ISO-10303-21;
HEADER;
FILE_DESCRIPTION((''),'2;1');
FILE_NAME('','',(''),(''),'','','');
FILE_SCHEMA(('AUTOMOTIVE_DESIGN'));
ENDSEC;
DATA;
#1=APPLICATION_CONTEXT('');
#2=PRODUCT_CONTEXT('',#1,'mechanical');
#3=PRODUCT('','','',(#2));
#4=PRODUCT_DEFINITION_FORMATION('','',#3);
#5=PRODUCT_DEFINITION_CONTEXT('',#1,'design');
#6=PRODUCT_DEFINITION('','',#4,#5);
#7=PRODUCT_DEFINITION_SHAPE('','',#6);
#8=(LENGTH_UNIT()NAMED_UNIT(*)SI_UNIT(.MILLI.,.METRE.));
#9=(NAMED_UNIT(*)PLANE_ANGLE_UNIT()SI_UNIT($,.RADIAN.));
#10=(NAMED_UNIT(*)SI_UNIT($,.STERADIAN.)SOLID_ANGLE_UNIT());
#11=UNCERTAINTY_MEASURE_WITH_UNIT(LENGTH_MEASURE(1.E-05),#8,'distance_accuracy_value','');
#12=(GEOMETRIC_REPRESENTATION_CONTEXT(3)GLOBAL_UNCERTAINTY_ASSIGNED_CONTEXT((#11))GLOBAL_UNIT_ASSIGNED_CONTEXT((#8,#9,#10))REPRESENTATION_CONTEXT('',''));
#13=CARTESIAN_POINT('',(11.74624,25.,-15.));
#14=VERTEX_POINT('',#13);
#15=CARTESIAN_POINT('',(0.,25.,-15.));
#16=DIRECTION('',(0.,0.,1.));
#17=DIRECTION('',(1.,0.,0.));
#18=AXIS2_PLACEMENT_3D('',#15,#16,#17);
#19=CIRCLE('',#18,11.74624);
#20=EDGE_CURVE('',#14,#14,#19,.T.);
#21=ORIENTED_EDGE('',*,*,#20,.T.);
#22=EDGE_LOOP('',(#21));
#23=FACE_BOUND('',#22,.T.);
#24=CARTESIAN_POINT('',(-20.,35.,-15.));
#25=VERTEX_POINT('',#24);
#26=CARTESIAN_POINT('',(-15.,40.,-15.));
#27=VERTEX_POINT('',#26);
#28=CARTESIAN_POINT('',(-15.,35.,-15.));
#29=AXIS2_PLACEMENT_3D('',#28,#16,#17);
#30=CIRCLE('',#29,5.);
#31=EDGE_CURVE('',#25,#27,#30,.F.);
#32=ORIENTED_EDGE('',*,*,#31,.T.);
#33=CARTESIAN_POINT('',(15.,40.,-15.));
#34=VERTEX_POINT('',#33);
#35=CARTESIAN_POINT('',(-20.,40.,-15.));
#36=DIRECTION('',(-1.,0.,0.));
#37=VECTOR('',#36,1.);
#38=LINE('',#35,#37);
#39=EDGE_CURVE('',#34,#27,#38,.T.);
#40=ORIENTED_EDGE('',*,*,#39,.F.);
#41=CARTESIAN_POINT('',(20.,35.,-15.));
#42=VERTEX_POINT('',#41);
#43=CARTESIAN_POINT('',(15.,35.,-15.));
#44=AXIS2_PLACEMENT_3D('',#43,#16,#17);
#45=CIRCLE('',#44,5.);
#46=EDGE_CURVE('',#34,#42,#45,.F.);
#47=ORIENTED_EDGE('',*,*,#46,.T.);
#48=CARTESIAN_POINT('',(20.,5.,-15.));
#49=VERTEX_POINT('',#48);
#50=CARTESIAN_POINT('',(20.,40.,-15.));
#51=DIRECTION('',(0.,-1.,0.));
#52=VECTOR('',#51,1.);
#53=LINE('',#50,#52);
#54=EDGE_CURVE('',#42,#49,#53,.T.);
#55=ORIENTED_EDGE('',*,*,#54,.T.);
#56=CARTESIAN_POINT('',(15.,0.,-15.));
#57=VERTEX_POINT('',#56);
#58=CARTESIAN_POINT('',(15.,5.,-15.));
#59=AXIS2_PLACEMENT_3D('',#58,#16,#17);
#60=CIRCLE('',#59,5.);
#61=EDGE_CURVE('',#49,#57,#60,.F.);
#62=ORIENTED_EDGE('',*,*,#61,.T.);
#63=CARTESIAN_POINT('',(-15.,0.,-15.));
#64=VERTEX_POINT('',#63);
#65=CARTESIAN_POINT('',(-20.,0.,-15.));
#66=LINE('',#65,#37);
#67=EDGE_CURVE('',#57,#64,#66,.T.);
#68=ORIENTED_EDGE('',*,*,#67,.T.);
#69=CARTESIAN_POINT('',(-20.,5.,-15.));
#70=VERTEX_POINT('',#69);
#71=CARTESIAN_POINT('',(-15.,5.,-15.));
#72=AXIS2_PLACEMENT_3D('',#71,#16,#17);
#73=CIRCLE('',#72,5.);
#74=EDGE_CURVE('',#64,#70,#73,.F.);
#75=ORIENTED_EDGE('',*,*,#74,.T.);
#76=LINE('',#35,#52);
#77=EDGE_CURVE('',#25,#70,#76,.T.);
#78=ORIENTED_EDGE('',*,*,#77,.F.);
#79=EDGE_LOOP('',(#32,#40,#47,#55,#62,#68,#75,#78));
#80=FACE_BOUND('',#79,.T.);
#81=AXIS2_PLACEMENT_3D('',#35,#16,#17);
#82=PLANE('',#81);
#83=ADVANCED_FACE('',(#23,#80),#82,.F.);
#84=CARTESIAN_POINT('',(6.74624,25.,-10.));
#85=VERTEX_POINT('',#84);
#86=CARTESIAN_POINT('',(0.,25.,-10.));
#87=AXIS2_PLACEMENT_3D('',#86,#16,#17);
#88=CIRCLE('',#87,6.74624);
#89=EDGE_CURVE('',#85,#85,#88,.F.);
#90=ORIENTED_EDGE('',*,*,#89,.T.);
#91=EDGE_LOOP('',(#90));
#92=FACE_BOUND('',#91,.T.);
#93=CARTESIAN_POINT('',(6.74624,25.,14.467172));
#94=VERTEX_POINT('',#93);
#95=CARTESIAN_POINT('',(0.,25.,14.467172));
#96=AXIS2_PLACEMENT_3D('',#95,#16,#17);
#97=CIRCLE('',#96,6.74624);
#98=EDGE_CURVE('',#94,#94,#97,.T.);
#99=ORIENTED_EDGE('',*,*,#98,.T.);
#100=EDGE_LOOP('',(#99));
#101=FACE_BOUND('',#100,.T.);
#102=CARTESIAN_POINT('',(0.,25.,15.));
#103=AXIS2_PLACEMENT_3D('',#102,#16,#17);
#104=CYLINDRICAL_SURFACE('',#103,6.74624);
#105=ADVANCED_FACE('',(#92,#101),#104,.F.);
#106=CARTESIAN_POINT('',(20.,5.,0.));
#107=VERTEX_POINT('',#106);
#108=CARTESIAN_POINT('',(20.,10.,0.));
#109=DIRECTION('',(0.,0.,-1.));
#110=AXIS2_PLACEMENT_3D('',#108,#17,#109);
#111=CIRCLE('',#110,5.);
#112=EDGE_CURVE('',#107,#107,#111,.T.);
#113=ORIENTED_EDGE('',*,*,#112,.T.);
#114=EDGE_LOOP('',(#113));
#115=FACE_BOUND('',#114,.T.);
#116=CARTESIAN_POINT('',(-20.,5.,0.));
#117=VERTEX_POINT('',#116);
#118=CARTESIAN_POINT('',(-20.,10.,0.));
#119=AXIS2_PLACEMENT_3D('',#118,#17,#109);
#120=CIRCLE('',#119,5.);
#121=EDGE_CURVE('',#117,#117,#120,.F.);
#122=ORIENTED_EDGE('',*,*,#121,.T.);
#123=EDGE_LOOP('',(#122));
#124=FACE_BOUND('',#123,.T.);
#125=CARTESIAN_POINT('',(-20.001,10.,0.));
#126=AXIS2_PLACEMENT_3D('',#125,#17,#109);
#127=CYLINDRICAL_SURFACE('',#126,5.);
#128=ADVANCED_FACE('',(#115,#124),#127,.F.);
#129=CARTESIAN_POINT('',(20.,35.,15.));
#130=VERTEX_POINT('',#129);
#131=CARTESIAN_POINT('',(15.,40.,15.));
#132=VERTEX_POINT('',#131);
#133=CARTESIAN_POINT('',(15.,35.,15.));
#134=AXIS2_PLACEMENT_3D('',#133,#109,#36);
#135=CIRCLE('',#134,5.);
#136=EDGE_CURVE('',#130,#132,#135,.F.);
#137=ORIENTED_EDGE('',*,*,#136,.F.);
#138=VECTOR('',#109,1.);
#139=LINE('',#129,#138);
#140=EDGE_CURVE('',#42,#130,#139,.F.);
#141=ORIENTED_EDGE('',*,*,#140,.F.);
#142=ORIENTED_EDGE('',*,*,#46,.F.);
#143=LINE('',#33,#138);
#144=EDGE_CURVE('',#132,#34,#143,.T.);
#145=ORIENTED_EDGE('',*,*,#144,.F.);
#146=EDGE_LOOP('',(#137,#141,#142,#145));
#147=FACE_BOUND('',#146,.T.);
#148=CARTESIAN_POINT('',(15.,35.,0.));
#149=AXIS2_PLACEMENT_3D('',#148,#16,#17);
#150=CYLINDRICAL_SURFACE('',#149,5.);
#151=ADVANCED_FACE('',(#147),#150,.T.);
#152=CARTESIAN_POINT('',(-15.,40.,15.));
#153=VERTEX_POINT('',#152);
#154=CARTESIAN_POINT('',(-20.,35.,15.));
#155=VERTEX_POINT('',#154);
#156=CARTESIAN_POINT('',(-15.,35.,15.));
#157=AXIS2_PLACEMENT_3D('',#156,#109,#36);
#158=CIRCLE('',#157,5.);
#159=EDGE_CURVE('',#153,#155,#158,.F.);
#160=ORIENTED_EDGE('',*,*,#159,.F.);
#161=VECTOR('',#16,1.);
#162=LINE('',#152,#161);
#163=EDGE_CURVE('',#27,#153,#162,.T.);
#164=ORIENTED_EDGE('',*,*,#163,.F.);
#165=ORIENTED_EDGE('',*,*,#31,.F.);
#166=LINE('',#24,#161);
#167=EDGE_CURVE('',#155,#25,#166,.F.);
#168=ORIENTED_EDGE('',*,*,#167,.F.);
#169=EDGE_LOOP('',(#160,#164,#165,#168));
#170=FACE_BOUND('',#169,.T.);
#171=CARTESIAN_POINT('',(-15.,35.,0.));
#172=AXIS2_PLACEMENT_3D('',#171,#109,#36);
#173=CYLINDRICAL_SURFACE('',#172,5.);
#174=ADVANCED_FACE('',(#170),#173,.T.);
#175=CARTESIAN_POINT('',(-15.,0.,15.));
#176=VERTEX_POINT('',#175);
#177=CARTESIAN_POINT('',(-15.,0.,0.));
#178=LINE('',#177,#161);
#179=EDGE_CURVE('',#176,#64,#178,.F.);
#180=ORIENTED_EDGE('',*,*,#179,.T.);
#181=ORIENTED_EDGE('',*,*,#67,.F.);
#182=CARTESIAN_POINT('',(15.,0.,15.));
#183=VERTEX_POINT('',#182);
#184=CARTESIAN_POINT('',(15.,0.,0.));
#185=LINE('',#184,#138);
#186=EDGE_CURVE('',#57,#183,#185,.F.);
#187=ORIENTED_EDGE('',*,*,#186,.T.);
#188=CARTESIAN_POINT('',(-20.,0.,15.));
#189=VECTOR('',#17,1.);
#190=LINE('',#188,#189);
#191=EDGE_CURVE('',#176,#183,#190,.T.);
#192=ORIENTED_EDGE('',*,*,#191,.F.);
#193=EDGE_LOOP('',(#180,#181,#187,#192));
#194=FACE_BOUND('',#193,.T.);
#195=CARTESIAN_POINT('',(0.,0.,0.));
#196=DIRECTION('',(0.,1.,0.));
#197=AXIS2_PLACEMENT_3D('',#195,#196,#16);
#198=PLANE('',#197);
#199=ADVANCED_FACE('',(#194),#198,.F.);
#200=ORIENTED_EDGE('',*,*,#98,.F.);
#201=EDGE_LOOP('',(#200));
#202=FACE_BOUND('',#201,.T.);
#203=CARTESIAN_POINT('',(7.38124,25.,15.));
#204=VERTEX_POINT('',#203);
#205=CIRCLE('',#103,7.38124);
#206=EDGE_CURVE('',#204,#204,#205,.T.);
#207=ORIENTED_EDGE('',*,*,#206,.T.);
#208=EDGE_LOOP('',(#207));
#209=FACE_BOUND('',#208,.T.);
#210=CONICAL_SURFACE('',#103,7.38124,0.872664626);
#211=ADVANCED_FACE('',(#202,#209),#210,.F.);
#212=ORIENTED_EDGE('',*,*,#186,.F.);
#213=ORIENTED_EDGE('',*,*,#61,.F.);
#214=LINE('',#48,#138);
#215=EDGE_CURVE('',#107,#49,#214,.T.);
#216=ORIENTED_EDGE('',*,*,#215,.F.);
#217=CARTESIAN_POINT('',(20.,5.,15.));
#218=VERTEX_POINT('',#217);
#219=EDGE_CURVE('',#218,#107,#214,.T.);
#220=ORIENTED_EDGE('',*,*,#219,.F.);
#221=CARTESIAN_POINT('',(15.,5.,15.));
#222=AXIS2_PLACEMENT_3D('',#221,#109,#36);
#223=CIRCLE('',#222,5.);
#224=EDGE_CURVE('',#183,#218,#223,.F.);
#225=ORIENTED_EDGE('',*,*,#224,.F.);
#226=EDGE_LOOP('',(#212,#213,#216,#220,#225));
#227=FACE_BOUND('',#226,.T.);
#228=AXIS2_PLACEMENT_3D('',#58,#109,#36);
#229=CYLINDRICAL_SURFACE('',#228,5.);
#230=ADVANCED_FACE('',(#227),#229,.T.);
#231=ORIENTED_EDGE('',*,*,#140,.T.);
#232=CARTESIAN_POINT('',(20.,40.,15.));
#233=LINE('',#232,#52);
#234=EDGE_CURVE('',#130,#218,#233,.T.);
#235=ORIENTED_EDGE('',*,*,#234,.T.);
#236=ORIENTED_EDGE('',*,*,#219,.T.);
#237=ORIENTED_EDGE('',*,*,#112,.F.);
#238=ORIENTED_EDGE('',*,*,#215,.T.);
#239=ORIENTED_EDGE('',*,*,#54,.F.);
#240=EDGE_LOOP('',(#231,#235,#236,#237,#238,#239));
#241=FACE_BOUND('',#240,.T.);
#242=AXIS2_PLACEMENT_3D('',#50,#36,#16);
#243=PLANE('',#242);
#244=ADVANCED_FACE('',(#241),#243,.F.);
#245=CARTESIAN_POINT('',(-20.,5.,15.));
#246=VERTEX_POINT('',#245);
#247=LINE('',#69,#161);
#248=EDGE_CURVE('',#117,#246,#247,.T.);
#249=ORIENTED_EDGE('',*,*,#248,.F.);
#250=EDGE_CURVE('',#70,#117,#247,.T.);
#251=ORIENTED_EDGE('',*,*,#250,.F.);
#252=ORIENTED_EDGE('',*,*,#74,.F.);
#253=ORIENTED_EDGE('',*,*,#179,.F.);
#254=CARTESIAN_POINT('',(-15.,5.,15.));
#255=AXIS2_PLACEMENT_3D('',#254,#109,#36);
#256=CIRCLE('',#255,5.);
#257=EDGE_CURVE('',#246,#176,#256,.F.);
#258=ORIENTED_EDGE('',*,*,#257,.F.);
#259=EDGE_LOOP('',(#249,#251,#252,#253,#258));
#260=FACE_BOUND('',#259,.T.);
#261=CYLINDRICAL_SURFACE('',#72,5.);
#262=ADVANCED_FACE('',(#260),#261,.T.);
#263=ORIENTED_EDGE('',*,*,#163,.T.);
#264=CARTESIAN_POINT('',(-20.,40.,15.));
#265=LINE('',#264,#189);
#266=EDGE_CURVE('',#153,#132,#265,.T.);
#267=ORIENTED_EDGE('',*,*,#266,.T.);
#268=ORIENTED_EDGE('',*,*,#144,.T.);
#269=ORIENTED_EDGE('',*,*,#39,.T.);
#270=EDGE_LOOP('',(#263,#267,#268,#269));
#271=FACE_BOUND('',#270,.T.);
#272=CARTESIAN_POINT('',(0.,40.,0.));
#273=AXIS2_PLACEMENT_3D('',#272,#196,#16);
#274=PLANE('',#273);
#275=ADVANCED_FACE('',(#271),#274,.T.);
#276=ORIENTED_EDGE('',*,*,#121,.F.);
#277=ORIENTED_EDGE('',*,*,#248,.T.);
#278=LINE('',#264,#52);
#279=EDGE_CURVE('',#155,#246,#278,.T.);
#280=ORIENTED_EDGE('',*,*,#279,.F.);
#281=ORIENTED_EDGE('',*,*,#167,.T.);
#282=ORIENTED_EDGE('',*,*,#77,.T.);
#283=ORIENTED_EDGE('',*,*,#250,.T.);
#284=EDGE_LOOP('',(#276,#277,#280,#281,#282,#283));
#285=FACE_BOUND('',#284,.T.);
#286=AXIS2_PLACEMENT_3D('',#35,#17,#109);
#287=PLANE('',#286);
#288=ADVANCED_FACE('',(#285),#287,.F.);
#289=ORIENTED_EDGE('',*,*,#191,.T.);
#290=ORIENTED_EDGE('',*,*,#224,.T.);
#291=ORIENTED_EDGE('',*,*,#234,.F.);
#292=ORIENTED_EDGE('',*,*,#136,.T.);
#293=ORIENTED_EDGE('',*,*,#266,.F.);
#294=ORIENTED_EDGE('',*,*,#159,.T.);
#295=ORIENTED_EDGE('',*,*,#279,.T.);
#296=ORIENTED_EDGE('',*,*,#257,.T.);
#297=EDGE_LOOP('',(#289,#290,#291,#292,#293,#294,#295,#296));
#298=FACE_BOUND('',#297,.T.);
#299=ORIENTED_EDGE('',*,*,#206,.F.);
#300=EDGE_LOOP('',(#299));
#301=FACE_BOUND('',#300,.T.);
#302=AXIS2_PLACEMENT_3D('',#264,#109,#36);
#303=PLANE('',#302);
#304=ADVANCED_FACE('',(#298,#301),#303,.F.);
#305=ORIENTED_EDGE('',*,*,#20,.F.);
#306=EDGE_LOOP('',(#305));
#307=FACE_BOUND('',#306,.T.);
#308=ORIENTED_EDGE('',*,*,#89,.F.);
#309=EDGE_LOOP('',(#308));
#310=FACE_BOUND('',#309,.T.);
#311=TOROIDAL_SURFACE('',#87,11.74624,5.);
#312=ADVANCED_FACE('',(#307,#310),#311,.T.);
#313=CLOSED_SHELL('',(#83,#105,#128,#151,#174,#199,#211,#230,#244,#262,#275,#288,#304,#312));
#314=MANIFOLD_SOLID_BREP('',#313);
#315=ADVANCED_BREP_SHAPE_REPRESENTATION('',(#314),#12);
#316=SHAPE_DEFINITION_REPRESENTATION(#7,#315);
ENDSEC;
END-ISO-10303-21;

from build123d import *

# Parameters (mm, degrees)
SKETCH1_W                         = 40
SKETCH1_H                         = 30
BOSS_EXTRUDE1_DEPTH               = 40
F_1_2_CLEARANCE_HOLE1_D           = 13.49248
F_1_2_CLEARANCE_HOLE1_CSINK_D     = 14.76248
F_1_2_CLEARANCE_HOLE1_CSINK_ANGLE = 100
CUT_EXTRUDE1_REACH                = 60.523
SKETCH4_R                         = 5
FILLET1_R                         = 5


with BuildPart() as part:
    # Sketch1 → Boss-Extrude1 (new body)
    with BuildSketch(Plane(origin=(0, 0, 0), x_dir=(1, 0, 0), z_dir=(0, 1, 0))):
        Rectangle(SKETCH1_W, SKETCH1_H)
    extrude(amount=BOSS_EXTRUDE1_DEPTH)

    # 1/2 Clearance Hole1 (through all)
    with Locations(Plane.XY.offset(15)):
        with Locations((0, 25)):
            CounterSinkHole(F_1_2_CLEARANCE_HOLE1_D / 2, F_1_2_CLEARANCE_HOLE1_CSINK_D / 2, counter_sink_angle=F_1_2_CLEARANCE_HOLE1_CSINK_ANGLE)

    # Sketch4 → Cut-Extrude1 (cut, up to next)
    with BuildSketch(Plane(origin=(20, 0, 0), x_dir=(0, 0, -1), z_dir=(1, 0, 0)), mode=Mode.PRIVATE) as cut_extrude1_sk1:
        with Locations((0, 10)):
            Circle(SKETCH4_R)
    cut_extrude1_tool1 = extrude(cut_extrude1_sk1.sketch, amount=-CUT_EXTRUDE1_REACH, mode=Mode.PRIVATE) & part.part
    add(cut_extrude1_tool1.solids().sort_by_distance((20, 10, 0))[0], mode=Mode.SUBTRACT)

    # Fillet1
    fillet1_edges = [part.edges().sort_by_distance(p)[0] for p in [
        (-20, 40, 0),
        (6.74624, 25, -15),
        (20, 40, 0),
        (-20, 0, 0),
        (20, 0, 0),
    ]]
    fillet(fillet1_edges, radius=FILLET1_R - 0.0001)  # a hair under: the kernel refuses the full size


solid = part.part
